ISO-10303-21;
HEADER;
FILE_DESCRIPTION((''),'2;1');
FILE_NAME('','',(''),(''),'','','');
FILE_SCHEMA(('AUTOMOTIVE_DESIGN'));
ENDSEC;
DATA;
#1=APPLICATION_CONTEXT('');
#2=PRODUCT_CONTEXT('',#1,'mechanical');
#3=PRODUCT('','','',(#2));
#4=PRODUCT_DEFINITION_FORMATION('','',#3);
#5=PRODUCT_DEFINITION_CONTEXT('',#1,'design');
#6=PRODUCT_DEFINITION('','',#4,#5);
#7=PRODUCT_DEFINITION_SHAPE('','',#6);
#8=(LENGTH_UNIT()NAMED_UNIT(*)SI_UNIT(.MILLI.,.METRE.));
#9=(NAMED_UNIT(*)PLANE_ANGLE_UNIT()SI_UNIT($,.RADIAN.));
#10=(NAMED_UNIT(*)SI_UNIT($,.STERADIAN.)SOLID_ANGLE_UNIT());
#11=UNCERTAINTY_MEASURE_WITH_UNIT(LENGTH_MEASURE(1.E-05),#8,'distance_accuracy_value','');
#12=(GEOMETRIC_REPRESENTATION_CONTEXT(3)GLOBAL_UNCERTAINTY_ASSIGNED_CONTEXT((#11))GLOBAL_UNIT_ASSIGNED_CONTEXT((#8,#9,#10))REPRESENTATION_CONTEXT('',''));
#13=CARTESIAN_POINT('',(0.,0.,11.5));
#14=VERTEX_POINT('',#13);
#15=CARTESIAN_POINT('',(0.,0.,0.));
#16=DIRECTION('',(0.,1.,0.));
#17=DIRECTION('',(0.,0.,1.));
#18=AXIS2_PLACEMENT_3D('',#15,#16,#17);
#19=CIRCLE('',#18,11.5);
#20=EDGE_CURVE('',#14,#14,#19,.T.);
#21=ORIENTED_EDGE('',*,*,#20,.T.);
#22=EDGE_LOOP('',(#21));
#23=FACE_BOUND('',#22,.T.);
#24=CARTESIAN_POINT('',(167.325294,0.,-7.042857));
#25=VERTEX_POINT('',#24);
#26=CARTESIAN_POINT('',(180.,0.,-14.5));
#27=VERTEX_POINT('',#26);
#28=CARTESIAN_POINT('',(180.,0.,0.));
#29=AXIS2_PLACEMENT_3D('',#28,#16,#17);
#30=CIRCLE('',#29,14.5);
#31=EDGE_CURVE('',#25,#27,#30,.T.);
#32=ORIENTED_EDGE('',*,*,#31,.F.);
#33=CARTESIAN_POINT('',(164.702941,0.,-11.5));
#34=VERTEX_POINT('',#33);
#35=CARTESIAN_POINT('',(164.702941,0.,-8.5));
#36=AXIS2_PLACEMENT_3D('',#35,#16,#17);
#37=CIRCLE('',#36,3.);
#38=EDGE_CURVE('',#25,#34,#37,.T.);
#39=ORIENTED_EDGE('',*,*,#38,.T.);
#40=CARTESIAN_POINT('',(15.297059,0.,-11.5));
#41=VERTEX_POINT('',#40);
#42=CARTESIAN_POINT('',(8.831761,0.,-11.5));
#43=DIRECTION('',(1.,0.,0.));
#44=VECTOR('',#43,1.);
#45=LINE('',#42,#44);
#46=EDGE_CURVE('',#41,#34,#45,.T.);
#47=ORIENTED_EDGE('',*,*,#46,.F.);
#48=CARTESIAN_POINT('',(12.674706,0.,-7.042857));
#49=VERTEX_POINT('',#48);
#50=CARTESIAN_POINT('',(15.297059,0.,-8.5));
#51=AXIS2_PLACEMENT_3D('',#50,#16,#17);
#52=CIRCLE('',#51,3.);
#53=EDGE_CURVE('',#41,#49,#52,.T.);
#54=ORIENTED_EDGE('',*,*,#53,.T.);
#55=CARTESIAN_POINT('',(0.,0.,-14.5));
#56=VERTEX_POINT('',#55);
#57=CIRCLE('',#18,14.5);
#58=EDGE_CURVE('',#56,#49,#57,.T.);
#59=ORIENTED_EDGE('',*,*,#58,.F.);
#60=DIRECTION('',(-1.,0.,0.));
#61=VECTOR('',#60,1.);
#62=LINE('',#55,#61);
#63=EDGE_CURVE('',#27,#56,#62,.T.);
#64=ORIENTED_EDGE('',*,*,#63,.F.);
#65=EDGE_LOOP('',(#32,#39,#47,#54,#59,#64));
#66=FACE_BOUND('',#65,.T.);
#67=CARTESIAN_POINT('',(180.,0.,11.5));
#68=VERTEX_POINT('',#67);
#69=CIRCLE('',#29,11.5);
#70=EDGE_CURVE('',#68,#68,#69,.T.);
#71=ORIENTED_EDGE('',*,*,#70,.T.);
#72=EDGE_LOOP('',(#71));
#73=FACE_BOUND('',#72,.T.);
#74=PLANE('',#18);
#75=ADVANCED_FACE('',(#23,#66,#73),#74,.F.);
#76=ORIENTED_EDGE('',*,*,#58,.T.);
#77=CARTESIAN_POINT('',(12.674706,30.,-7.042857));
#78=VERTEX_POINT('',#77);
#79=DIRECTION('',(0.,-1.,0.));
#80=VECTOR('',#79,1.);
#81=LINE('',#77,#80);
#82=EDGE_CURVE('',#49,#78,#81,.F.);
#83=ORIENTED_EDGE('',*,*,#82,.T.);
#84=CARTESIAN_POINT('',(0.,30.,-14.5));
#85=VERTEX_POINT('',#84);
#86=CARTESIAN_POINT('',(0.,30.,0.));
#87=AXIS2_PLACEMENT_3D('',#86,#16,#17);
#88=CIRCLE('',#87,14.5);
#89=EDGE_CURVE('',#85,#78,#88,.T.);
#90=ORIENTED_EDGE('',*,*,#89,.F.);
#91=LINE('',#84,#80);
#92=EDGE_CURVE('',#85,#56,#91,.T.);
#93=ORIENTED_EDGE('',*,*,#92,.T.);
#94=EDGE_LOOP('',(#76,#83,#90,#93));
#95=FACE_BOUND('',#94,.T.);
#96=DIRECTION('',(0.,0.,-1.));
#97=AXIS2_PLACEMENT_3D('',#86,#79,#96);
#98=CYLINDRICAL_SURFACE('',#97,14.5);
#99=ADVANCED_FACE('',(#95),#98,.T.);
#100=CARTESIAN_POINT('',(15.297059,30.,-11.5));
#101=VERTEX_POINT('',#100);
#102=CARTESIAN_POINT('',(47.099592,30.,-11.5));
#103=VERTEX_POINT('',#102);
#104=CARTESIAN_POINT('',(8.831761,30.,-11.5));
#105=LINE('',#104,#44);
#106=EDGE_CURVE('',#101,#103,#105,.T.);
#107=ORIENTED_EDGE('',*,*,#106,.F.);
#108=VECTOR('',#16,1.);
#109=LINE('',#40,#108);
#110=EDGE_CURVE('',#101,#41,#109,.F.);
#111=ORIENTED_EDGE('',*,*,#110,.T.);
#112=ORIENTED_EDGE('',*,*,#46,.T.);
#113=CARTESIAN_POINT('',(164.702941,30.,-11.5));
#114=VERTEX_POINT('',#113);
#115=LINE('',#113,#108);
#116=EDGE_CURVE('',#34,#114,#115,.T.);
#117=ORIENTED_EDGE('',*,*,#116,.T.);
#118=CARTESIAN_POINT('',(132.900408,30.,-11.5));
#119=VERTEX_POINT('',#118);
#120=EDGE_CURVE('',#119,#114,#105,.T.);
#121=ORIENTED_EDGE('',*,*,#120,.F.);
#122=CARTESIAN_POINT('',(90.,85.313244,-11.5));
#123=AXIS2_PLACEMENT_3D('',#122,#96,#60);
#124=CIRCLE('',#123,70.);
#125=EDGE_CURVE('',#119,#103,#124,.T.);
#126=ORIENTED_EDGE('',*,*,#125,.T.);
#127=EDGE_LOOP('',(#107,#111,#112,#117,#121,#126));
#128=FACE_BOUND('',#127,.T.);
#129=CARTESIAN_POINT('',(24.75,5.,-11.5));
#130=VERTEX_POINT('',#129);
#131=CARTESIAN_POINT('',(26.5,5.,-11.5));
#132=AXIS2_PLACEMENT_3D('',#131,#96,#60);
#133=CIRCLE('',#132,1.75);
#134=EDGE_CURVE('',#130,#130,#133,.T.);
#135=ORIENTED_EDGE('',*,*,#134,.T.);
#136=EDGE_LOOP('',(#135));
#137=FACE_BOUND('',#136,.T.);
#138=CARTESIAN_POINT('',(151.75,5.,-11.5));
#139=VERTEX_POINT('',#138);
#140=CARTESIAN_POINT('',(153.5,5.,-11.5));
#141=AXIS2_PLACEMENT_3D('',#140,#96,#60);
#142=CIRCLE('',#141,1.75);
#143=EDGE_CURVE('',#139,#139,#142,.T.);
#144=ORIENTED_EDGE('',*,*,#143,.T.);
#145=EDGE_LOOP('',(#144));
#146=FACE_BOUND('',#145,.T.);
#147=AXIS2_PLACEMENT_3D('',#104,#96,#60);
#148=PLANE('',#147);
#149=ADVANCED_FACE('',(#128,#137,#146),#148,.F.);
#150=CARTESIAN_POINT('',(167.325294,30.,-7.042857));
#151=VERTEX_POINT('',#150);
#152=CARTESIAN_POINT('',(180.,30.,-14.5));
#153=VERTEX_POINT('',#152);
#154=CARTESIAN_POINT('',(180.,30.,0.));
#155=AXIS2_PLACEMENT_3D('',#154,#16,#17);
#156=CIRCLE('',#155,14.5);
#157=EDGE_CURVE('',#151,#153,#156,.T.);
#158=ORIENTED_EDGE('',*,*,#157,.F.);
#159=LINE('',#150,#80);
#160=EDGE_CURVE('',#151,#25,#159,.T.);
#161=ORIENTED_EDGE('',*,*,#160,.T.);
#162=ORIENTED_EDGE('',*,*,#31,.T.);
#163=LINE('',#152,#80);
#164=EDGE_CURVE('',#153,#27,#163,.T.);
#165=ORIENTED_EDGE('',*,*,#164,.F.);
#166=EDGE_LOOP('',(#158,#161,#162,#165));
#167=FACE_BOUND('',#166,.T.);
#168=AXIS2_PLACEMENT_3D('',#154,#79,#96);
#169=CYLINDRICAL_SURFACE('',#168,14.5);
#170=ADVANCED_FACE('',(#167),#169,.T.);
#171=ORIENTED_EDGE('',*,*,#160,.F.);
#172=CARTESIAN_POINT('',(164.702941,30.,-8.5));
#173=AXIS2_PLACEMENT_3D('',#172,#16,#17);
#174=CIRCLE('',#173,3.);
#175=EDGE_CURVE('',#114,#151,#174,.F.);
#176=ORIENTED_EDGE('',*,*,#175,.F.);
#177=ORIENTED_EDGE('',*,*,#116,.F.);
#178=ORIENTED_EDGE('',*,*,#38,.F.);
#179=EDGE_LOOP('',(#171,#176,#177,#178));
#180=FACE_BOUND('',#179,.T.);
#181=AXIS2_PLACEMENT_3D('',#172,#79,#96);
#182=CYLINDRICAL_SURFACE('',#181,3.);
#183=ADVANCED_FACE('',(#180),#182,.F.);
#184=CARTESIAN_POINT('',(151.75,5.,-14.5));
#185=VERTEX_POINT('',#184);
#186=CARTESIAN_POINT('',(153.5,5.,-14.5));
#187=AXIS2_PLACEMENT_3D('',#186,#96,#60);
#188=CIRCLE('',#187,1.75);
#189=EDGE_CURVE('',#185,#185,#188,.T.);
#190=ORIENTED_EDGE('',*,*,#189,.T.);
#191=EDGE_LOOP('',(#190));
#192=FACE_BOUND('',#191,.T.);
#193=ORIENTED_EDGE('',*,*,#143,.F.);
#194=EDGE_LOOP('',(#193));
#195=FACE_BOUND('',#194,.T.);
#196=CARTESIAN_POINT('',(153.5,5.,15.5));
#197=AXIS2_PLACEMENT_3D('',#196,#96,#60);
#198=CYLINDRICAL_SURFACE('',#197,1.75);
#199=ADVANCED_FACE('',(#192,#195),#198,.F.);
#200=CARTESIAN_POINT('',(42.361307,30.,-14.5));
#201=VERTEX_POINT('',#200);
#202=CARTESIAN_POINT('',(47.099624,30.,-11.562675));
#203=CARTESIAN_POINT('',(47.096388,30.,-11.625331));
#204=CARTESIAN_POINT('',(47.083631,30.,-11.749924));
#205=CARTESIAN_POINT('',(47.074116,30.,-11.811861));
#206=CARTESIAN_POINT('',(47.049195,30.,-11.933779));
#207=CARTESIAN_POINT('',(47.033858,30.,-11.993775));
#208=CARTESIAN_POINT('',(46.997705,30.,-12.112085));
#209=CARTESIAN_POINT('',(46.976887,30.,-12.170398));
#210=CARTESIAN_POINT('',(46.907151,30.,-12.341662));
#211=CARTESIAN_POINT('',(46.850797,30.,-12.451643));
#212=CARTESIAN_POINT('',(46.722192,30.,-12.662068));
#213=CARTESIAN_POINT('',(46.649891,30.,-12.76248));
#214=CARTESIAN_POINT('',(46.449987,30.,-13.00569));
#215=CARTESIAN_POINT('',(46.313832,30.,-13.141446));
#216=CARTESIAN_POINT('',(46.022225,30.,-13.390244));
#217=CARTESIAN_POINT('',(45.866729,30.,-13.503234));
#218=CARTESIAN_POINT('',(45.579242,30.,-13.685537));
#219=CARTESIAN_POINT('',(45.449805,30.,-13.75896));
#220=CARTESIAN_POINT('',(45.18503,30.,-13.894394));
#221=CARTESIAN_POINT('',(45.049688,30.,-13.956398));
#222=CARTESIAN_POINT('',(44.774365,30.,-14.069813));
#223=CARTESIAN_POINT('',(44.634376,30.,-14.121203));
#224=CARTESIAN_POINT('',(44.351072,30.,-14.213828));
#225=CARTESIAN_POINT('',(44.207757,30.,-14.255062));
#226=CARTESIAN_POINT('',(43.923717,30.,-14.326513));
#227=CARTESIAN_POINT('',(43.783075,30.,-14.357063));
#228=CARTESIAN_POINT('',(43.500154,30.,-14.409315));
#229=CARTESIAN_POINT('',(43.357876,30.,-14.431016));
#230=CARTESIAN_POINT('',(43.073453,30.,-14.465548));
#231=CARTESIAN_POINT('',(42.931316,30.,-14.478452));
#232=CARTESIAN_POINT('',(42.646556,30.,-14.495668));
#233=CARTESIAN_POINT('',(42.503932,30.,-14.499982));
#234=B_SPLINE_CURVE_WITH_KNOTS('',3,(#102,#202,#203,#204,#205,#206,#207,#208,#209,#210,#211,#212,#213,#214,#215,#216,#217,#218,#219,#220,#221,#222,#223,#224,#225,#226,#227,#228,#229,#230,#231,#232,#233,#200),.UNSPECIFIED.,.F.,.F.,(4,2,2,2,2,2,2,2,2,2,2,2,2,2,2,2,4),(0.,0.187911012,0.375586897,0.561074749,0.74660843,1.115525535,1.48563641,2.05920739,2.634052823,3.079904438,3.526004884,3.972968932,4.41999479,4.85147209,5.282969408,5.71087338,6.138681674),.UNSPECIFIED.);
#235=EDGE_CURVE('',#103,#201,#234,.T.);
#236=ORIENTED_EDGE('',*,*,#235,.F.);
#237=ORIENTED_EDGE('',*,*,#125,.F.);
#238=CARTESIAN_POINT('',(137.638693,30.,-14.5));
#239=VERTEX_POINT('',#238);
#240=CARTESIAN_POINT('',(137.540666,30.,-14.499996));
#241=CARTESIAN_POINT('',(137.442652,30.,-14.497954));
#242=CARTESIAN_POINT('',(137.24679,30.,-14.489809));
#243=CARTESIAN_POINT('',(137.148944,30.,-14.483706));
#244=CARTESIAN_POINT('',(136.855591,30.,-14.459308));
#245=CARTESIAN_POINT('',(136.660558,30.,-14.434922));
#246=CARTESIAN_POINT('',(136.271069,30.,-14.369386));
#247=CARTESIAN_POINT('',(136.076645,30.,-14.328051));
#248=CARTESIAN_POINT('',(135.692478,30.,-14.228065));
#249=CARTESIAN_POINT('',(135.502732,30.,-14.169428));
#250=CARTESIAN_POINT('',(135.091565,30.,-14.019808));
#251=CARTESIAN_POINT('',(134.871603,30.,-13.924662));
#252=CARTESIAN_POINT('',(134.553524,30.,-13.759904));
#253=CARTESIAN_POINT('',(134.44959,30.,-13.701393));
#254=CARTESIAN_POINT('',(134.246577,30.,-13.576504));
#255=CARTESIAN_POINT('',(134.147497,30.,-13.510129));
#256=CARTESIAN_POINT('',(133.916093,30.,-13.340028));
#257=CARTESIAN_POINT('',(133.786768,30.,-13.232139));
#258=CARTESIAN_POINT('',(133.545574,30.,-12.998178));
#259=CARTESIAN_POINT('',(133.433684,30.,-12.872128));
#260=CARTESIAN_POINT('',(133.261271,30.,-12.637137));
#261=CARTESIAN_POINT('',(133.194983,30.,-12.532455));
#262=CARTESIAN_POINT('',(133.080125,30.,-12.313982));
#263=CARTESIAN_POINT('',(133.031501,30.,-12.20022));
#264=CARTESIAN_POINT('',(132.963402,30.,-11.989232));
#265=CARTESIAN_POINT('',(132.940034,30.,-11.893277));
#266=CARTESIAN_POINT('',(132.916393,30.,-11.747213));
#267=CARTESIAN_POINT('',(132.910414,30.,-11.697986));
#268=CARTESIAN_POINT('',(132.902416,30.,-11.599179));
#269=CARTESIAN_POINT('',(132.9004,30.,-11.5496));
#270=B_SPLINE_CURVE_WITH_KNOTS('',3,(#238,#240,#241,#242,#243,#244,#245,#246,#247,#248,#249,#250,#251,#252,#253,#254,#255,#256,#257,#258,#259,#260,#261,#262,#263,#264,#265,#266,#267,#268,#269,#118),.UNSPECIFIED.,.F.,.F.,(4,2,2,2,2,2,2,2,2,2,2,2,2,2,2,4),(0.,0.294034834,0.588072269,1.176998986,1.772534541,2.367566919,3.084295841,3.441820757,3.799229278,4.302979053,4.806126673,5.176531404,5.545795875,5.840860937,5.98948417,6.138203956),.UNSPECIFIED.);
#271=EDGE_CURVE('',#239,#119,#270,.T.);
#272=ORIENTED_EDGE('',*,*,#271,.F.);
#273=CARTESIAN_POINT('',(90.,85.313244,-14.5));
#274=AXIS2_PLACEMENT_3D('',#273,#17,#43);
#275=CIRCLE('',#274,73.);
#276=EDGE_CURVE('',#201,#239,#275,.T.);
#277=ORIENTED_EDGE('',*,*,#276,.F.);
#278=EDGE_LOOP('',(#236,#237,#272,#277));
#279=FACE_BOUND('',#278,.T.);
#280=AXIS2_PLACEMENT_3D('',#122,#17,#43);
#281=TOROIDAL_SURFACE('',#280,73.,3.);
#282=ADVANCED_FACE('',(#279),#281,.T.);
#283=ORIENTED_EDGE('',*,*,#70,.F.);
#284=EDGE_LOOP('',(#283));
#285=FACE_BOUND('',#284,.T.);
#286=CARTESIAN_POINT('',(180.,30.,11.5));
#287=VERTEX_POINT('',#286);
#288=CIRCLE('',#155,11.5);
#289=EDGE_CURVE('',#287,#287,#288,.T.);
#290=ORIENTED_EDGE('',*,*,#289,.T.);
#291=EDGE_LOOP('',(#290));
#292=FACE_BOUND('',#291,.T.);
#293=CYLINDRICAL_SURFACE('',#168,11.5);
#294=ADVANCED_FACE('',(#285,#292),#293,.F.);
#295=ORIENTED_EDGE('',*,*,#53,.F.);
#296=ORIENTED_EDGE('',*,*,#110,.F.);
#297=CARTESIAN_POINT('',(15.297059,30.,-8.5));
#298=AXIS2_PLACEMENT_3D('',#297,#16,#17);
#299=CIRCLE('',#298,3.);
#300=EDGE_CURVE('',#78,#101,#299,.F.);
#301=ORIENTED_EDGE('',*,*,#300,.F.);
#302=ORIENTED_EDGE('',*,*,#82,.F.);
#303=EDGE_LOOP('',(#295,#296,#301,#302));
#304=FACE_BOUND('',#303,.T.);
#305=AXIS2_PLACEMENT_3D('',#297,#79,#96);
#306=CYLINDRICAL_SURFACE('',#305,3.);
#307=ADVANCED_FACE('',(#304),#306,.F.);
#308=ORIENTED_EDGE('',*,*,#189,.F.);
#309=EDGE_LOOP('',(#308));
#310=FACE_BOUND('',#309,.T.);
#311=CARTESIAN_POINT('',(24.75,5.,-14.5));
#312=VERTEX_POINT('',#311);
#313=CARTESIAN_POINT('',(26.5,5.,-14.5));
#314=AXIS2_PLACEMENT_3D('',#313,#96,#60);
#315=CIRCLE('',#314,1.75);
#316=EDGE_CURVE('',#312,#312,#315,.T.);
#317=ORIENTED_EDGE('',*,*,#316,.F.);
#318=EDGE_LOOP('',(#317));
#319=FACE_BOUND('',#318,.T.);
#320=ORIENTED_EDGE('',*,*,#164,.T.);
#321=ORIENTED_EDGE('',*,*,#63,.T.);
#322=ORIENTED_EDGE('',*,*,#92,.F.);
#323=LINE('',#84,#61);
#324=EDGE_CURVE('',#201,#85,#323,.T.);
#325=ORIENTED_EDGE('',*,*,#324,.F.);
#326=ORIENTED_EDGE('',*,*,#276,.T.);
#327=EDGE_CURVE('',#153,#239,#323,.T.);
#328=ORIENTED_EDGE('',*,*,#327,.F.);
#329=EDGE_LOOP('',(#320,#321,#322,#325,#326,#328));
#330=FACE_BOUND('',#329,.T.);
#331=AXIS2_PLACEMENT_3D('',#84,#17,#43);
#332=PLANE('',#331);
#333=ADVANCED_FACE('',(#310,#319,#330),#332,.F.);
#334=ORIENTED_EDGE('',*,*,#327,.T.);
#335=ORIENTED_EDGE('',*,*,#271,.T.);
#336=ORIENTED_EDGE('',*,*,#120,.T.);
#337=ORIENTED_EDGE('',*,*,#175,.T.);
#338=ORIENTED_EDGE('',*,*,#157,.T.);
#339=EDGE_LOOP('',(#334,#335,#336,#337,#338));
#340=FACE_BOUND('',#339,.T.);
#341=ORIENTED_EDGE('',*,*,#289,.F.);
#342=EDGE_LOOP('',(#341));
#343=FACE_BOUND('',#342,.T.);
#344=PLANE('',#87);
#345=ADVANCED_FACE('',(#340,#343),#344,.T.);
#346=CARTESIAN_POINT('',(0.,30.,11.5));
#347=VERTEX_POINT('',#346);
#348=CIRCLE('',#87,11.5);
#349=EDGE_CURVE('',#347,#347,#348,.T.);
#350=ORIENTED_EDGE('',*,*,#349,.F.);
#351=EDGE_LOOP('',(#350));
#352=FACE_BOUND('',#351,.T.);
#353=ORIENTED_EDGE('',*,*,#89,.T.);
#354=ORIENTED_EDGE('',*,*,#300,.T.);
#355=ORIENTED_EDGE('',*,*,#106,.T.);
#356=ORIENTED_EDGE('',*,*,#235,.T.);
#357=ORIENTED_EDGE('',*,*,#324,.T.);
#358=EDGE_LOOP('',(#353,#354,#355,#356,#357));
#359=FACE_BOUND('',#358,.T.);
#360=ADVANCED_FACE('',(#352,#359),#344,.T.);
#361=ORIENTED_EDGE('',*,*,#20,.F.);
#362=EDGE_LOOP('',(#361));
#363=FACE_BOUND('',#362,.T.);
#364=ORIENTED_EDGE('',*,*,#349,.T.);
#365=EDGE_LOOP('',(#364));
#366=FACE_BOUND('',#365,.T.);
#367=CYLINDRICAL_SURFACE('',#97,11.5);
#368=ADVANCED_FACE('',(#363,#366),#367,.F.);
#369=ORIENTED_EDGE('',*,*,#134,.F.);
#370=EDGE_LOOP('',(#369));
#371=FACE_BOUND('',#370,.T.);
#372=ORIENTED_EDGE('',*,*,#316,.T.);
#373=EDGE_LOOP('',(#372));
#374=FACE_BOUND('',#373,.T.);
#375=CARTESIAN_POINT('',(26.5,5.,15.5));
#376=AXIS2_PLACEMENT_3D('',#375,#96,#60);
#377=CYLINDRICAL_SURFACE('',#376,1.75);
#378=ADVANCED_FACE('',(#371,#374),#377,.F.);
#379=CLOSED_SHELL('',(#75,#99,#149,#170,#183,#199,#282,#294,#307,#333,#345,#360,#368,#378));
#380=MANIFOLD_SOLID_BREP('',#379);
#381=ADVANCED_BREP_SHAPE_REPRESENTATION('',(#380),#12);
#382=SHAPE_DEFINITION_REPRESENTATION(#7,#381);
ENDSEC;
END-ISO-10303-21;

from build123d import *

# Parameters (mm, degrees)
SKETCH1_R           = 11.5
BOSS_EXTRUDE1_DEPTH = 30
FILLET1_R           = 3
SKETCH2_R           = 70
SKETCH2_R_2         = 1.75
CUT_EXTRUDE1_DEPTH  = 30
FILLET2_R           = 3


with BuildPart() as part:
    # Sketch1 → Boss-Extrude1 (new body)
    with BuildSketch(Plane(origin=(0, 0, 0), x_dir=(1, 0, 0), z_dir=(0, 1, 0))):
        with BuildLine():
            Line((0, 14.5), (180, 14.5))
            ThreePointArc((180, 14.5), (184.663689527, -13.729530218), (171.168239134, 11.5))
            Line((171.168239134, 11.5), (8.831760866, 11.5))
            ThreePointArc((8.831760866, 11.5), (-4.663689527, -13.729530218), (0, 14.5))
        make_face()
        with Locations(Location((0, 0, 0), (0, 0, 270))):
            Circle(SKETCH1_R, mode=Mode.SUBTRACT)
        with Locations(Location((180, 0, 0), (0, 0, 270))):
            Circle(SKETCH1_R, mode=Mode.SUBTRACT)
    extrude(amount=BOSS_EXTRUDE1_DEPTH)

    # Fillet1
    fillet1_edges = [part.edges().sort_by_distance(p)[0] for p in [
        (171.168239134, 15, -11.5),
        (8.831760866, 15, -11.5),
    ]]
    fillet(fillet1_edges, radius=FILLET1_R)

    # Sketch2 → Cut-Extrude1 (cut)
    with BuildSketch(Plane(origin=(0, 0, -14.5), x_dir=(-1, 0, 0), z_dir=(0, 0, -1))):
        with Locations((-90, 85.31324406)):
            Circle(SKETCH2_R)
        with Locations((-26.5, 5)):
            Circle(SKETCH2_R_2)
        with Locations((-153.5, 5)):
            Circle(SKETCH2_R_2)
    extrude(amount=-CUT_EXTRUDE1_DEPTH, mode=Mode.SUBTRACT)

    # Fillet2
    fillet2_edges = [part.edges().sort_by_distance(p)[0] for p in [
        (90, 15.31324406, -14.5),
    ]]
    fillet(fillet2_edges, radius=FILLET2_R - 0.0001)  # a hair under: the kernel refuses the full size


solid = part.part
